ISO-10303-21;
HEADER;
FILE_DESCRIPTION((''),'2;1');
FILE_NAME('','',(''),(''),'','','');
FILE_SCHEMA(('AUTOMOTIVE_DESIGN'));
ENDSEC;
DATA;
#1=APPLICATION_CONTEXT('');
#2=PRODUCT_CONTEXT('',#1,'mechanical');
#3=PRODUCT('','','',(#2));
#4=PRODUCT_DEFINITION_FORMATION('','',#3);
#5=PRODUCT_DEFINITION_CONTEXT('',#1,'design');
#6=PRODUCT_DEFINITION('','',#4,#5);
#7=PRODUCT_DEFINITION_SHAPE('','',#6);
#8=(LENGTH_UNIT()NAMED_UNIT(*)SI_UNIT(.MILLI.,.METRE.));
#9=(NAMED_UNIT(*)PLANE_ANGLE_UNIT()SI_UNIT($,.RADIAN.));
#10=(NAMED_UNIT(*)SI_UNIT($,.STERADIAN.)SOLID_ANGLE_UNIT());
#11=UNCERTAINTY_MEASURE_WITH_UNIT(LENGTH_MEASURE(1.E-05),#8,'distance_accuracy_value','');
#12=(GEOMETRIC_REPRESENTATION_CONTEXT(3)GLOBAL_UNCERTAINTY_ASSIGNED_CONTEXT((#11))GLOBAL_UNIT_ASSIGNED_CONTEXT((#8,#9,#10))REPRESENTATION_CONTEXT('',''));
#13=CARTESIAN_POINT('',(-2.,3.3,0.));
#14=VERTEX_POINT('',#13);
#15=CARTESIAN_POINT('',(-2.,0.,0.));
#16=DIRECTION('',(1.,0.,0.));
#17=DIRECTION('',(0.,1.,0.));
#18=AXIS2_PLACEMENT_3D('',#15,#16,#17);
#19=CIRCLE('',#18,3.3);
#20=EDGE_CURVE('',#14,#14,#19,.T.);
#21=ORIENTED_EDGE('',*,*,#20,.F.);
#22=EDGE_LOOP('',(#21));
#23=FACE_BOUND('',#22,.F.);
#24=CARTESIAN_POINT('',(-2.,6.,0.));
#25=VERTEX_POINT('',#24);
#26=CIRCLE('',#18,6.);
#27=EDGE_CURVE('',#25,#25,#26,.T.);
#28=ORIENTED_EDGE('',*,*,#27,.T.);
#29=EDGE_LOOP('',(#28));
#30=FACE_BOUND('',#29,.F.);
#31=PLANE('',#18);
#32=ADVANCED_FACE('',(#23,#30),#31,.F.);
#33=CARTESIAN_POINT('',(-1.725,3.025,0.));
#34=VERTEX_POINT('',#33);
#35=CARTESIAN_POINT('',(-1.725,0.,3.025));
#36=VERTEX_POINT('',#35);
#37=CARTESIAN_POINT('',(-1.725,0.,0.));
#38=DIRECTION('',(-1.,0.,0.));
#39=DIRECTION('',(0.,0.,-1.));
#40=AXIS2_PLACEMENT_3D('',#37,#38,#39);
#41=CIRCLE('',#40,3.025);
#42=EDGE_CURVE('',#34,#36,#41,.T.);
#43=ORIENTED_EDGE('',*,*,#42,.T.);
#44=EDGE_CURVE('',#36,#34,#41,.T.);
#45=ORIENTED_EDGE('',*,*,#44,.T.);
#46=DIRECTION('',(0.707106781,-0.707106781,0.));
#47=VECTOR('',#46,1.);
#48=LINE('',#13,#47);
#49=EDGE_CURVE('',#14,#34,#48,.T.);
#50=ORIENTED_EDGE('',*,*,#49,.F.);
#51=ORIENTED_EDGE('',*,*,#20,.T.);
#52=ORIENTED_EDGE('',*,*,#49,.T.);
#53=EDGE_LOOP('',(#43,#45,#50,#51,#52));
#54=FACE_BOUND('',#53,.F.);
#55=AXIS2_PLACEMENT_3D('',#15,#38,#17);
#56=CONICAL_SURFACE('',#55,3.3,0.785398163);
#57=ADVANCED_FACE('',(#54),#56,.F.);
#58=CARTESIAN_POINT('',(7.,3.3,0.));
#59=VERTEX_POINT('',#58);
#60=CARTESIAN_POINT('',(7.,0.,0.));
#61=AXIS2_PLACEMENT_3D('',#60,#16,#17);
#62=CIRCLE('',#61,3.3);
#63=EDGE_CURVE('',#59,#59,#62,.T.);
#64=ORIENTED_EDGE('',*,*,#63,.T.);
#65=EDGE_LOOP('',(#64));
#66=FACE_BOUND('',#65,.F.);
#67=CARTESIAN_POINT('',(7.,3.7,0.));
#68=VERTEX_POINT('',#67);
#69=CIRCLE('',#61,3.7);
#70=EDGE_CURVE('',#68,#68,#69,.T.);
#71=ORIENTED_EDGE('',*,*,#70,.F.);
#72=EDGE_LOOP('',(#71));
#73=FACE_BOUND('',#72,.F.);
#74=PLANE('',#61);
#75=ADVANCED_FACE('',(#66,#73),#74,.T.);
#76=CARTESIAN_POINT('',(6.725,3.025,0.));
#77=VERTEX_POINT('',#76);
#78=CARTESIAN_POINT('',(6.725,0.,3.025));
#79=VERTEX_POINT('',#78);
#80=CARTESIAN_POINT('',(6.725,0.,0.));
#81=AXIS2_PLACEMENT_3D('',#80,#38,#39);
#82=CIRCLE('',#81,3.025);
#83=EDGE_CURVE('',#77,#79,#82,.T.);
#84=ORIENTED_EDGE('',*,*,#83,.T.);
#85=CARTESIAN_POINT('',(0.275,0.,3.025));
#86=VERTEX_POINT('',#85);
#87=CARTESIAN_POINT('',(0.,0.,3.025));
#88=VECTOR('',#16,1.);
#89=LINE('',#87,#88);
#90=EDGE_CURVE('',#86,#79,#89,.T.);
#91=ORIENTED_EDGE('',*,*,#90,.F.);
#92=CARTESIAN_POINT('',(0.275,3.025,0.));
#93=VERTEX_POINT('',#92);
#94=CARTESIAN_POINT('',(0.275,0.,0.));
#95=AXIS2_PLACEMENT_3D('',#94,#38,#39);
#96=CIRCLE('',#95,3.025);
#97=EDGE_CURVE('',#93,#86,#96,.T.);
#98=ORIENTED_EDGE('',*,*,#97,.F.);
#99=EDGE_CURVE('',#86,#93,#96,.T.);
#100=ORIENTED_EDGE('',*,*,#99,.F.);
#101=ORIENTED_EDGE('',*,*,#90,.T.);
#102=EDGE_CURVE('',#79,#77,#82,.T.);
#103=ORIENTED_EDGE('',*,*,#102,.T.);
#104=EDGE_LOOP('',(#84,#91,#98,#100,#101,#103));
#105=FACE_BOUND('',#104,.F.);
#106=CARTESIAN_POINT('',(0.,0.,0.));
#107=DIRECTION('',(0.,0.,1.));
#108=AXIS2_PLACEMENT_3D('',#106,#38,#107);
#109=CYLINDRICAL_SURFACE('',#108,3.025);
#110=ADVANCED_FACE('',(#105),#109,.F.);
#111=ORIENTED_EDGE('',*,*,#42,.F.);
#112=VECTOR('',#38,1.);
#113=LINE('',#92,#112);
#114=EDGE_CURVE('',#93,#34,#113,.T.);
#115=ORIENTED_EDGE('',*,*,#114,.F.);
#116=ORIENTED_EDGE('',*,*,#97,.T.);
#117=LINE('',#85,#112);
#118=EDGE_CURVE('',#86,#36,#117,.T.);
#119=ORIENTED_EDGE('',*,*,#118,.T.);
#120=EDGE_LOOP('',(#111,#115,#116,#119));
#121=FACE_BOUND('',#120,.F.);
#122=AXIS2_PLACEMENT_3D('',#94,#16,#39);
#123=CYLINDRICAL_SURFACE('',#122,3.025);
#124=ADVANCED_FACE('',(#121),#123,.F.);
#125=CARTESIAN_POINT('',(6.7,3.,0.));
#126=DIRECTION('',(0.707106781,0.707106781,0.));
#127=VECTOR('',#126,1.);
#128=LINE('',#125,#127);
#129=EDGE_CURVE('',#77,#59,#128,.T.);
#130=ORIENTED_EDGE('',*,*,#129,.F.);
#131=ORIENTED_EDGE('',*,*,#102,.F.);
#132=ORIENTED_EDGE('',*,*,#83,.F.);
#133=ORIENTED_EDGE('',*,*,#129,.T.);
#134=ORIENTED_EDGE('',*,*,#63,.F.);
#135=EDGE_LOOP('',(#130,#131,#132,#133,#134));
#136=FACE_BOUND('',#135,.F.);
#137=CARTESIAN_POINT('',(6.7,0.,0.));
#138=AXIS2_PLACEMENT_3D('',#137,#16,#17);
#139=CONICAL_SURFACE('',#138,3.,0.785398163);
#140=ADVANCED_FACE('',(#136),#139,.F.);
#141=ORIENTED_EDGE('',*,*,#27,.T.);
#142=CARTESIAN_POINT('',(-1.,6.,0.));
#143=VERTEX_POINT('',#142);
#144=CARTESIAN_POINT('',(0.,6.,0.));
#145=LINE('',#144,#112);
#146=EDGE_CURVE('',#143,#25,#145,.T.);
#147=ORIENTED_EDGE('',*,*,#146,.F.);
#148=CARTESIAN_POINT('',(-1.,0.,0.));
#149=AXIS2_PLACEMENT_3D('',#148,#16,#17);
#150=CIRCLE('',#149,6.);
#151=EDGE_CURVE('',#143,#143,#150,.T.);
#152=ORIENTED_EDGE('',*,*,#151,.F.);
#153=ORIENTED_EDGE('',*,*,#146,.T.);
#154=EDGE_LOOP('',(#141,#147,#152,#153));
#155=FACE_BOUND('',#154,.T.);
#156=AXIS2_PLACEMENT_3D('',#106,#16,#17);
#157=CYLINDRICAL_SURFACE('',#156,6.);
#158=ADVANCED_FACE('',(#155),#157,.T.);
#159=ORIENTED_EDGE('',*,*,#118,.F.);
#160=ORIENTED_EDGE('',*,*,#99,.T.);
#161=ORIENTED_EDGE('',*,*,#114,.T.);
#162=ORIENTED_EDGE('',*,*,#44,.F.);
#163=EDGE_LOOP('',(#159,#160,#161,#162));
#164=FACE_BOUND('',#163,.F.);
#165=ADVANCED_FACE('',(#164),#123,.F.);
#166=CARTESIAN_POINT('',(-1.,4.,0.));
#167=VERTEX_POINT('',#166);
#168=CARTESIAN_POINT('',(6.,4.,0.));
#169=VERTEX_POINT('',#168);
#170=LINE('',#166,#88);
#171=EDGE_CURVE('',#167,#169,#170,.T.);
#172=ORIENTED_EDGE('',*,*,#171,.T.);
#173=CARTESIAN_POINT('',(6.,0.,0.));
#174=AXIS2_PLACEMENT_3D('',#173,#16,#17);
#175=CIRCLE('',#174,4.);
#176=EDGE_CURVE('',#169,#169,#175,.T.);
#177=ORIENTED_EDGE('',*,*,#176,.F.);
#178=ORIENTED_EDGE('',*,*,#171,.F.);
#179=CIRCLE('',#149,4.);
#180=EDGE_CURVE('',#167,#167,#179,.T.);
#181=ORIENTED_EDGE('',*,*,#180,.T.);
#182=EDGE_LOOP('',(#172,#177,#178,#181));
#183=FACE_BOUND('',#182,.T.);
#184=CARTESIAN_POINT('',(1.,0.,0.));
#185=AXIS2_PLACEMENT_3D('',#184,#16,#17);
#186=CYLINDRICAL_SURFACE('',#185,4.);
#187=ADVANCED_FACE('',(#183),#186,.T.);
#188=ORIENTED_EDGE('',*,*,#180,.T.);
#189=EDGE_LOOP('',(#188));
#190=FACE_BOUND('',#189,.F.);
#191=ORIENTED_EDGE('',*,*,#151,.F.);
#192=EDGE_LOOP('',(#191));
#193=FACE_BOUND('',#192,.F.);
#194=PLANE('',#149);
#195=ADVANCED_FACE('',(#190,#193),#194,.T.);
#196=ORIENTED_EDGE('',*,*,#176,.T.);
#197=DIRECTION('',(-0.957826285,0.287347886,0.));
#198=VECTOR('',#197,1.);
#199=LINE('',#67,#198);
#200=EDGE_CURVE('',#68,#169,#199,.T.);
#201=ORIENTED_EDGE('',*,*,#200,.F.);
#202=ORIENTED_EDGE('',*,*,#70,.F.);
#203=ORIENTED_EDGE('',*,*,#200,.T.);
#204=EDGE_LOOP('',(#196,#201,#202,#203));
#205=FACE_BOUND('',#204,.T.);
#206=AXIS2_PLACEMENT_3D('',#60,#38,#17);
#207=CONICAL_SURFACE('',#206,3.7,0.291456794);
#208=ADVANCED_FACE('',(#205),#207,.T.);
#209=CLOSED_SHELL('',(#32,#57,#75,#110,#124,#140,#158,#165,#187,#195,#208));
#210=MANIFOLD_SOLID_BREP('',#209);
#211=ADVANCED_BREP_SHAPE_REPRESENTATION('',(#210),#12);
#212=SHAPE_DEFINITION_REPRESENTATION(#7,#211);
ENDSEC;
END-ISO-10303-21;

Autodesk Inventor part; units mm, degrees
ref_plane "YZ Plane" through (0, 0, 0) normal (1, 0, 0) x (0, 1, 0)
ref_plane "XZ Plane" through (0, 0, 0) normal (0, 1, 0) x (-1, 0, 0)
ref_plane "XY Plane" through (0, 0, 0) normal (0, 0, 1) x (1, 0, 0)
sketch "Sketch_1" plane through (0, 0, 0) normal (0, 0, 1) x (1, 0, 0)
  line L0 (7, 0) -> (0, 0)
  line L1 (0, 3.3) -> (0.3, 3)
  line L2 (0.3, 3) -> (6.7, 3)
  line L3 (6.7, 3) -> (7, 3.3)
  line L4 (7, 3.3) -> (7, 3.7)
  line L5 (7, 3.7) -> (6, 4)
  line L6 (6, 4) -> (1, 4)
  line L7 (1, 4) -> (1, 6)
  line L8 (1, 6) -> (0, 6)
  line L9 (0, 6) -> (0, 3.3)
revolve "Revolution1" add sketch "Sketch_1" angle 360 about axis through (7, 0, 0) along (1, 0, 0)
sketch "스케치2" plane through (0, 0, 0) normal (-1, 0, 0) x (0, 0, 1)
  circle A0 centre (0, 0) radius 3.3 projected
  circle A1 centre (0, 0) radius 6 projected
  circle A2 centre (0, 0) radius 3.025
  dimension "d1" = 6.05
extrude "돌출1" cut sketch "스케치2" against normal up to surface (7 mm away) contours A2
move faces "이동1" translate (-2, 0, 0) faces at (0, 5.0099, -0.7419) (0.0917, 3.1979, -0.2582) (1, 5.2365, -0.7977) (0.6667, 5.9223, -0.9625)
properties part number "80F-0608"
